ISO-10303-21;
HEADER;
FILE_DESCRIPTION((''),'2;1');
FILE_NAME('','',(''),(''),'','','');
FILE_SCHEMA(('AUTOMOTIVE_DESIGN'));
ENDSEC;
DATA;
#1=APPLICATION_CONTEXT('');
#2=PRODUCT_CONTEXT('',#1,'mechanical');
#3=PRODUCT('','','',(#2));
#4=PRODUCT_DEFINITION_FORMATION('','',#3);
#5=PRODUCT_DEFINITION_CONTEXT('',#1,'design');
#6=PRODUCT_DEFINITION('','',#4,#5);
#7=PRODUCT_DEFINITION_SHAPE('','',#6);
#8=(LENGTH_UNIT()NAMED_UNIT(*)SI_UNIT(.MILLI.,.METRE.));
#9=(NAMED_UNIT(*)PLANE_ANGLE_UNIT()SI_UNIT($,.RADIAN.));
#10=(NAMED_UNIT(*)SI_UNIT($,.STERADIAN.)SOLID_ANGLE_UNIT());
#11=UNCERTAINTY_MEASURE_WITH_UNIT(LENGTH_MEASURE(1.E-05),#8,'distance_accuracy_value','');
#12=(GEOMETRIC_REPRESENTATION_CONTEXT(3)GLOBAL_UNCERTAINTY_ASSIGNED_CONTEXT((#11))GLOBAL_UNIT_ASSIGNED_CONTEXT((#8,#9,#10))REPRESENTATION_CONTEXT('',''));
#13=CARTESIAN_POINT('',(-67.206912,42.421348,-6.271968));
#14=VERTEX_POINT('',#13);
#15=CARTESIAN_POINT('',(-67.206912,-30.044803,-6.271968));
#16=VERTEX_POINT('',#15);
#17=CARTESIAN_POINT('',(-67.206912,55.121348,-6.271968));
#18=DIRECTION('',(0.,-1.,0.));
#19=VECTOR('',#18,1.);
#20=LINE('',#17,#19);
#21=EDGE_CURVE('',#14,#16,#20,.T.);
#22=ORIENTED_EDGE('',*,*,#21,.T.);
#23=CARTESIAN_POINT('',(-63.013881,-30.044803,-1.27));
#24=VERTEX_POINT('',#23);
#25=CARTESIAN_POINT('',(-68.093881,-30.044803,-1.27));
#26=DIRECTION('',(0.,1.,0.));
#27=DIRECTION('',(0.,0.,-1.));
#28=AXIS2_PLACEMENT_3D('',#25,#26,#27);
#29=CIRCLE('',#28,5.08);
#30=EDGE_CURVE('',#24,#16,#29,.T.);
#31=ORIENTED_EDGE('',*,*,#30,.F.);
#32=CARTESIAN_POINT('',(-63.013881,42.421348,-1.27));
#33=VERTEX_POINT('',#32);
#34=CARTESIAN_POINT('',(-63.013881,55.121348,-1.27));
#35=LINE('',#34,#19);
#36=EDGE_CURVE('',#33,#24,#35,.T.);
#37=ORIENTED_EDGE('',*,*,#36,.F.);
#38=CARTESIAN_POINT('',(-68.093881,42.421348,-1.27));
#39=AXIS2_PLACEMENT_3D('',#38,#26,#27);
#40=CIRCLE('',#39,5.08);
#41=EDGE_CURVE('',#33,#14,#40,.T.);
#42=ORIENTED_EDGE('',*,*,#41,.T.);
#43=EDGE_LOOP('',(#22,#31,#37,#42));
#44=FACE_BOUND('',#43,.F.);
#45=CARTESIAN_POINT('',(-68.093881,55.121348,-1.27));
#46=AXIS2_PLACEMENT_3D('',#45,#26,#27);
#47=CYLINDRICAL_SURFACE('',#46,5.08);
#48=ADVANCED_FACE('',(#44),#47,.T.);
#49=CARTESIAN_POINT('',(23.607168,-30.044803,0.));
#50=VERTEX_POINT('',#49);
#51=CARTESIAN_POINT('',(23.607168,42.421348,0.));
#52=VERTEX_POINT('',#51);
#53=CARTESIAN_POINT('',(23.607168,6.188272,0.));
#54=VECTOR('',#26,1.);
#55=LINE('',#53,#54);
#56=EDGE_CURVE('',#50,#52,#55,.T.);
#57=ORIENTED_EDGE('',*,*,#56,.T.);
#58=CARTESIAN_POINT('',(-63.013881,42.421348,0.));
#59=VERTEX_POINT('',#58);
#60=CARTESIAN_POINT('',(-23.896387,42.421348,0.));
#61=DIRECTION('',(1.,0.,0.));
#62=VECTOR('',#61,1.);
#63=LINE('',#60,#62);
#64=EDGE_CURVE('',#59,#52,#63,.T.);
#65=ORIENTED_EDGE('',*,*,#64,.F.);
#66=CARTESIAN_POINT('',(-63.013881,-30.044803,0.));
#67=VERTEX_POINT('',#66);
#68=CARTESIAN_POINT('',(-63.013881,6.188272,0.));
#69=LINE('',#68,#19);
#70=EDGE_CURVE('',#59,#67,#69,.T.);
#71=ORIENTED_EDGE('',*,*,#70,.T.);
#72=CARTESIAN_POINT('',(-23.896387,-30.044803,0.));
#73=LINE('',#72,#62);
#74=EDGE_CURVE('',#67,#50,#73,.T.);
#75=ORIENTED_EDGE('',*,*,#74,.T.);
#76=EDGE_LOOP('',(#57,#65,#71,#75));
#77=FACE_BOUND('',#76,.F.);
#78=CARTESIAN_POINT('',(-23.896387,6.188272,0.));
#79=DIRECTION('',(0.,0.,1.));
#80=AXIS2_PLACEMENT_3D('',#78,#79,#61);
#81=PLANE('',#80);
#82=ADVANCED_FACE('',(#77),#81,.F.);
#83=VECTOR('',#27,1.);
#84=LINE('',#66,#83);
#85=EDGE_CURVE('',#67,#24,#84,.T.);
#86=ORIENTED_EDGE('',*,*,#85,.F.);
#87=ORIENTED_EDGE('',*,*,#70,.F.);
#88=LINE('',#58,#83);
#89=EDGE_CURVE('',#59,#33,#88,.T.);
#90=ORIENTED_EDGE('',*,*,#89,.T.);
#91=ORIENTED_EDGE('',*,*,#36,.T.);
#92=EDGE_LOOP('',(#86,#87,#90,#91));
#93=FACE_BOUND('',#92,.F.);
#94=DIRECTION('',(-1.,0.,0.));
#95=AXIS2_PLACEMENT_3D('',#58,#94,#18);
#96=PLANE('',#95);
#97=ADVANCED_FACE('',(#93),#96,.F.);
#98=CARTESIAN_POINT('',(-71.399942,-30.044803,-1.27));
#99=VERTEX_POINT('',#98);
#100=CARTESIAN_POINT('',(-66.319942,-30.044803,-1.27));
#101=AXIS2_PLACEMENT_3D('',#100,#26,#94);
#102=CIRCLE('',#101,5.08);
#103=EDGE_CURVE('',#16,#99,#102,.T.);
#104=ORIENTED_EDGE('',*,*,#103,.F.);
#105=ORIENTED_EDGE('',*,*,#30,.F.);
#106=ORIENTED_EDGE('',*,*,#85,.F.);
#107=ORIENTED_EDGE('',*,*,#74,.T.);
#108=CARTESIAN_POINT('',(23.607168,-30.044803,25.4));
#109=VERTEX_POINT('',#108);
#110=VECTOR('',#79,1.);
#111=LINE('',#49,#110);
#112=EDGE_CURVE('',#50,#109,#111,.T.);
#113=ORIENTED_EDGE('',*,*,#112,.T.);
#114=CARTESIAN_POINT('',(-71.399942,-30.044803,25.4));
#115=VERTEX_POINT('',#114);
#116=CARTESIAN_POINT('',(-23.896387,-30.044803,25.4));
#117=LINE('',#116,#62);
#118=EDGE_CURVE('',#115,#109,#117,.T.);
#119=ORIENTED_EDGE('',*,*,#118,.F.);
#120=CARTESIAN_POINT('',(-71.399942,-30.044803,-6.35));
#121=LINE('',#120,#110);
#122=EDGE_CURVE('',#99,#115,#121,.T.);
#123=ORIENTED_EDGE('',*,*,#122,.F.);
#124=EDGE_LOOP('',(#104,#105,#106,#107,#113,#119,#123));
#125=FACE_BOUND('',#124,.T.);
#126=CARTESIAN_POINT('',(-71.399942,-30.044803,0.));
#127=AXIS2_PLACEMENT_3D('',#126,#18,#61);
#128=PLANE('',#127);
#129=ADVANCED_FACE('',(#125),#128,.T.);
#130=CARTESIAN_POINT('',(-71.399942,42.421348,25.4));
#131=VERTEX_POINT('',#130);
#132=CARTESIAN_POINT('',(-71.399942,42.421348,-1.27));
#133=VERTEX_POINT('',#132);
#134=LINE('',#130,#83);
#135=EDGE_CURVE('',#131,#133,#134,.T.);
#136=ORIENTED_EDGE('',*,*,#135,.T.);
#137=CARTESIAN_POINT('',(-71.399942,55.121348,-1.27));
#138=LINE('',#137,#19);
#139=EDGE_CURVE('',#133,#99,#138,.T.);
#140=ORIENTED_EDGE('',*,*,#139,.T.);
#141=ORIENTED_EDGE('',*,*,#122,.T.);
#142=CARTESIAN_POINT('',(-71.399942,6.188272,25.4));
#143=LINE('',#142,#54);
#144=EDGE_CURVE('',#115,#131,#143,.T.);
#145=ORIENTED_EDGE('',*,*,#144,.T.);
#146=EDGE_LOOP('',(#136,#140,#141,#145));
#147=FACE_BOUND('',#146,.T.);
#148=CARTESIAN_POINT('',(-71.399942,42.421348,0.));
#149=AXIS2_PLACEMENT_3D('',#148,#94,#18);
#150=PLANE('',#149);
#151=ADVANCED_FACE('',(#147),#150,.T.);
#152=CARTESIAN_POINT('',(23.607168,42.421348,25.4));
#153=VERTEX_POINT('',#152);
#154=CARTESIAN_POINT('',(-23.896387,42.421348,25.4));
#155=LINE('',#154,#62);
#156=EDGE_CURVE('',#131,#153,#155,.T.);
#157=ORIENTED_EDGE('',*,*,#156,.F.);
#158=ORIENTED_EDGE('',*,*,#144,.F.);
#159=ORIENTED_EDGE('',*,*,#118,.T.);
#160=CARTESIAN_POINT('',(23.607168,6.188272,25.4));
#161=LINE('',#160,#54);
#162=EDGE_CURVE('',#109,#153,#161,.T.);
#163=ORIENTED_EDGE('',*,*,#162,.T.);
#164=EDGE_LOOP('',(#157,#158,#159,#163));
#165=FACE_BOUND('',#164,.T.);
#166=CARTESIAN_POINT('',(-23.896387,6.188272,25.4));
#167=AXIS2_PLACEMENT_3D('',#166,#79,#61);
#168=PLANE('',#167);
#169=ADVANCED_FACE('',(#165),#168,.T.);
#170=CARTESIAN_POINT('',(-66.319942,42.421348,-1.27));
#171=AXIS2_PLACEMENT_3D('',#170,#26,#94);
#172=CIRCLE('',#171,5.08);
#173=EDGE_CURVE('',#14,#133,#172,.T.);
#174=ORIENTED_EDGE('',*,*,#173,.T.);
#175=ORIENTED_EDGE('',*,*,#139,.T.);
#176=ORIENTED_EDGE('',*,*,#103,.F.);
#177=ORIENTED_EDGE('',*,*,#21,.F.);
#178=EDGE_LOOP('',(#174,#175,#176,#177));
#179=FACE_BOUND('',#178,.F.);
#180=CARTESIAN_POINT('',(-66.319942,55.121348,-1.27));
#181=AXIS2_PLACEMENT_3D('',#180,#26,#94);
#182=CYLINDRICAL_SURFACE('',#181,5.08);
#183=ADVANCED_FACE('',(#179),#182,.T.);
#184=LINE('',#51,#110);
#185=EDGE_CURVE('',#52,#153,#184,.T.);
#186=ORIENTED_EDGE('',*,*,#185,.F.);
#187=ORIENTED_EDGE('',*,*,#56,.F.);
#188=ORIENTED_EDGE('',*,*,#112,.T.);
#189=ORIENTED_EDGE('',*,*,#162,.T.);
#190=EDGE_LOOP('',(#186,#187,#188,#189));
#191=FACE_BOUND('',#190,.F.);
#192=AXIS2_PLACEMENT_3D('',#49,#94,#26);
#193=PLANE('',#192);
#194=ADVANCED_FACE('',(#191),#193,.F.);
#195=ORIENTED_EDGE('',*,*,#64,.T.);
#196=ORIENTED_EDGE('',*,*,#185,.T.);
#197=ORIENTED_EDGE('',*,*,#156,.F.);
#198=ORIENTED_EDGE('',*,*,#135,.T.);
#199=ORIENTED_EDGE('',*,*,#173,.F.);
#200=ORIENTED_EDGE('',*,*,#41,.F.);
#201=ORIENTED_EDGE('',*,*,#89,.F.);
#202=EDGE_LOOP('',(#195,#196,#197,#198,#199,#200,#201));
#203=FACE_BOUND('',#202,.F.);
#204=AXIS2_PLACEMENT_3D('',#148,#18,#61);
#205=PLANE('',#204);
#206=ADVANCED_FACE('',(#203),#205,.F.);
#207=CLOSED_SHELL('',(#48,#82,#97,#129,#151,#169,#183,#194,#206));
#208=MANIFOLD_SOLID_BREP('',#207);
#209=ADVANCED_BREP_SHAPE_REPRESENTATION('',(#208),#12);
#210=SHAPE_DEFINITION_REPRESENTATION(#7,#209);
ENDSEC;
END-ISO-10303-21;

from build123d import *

# Parameters (mm, degrees)
F0_W        = 95.0071103871
F0_H        = 72.4661517888
F1_DEPTH    = 25.4
F2_W        = 8.3860605955
F2_H        = 72.4661517888
F3_DEPTH    = 6.35
F4_T1_DEPTH = 97.8661517888


# Not quite as in the source:
# - a fillet or chamfer that OpenCascade refuses, or shapes differently, is made with other operations: its cross-section is extruded or revolved along the edge and cut away or added


with BuildPart() as f1:
    # F0 (on Top) → F1 (new body)
    with BuildSketch(Plane.XY):
        with Locations((-23.8963868469, 6.1882724985)):
            Rectangle(F0_W, F0_H)
    extrude(amount=F1_DEPTH)

    # F2 (on face) → F3 (join)
    with BuildSketch(Plane(origin=(0, 0, 0), x_dir=(1, 0, 0), z_dir=(0, 0, -1))):
        with Locations((-67.2069117427, -6.1882724985)):
            Rectangle(F2_W, F2_H)
    extrude(amount=F3_DEPTH)

    # F4: fillet of radius 5.08 on 2 edges, made by hand

    # F4_s2 → F4_t1 (cut)
    with BuildSketch(Plane.XZ.offset(-55.121348393)):
        with BuildLine():
            ThreePointArc((-68.0938814449, -6.35), (-64.5017789965, -4.8621024484), (-63.0138814449, -1.27))
            Line((-63.0138814449, -1.27), (-63.0138814449, -6.35))
            Line((-63.0138814449, -6.35), (-68.0938814449, -6.35))
        make_face()
        with BuildLine():
            ThreePointArc((-71.3999420404, -1.27), (-69.9120444889, -4.8621024484), (-66.3199420404, -6.35))
            Line((-66.3199420404, -6.35), (-71.3999420404, -6.35))
            Line((-71.3999420404, -6.35), (-71.3999420404, -1.27))
        make_face()
    extrude(amount=F4_T1_DEPTH, mode=Mode.SUBTRACT)


solid = f1.part
